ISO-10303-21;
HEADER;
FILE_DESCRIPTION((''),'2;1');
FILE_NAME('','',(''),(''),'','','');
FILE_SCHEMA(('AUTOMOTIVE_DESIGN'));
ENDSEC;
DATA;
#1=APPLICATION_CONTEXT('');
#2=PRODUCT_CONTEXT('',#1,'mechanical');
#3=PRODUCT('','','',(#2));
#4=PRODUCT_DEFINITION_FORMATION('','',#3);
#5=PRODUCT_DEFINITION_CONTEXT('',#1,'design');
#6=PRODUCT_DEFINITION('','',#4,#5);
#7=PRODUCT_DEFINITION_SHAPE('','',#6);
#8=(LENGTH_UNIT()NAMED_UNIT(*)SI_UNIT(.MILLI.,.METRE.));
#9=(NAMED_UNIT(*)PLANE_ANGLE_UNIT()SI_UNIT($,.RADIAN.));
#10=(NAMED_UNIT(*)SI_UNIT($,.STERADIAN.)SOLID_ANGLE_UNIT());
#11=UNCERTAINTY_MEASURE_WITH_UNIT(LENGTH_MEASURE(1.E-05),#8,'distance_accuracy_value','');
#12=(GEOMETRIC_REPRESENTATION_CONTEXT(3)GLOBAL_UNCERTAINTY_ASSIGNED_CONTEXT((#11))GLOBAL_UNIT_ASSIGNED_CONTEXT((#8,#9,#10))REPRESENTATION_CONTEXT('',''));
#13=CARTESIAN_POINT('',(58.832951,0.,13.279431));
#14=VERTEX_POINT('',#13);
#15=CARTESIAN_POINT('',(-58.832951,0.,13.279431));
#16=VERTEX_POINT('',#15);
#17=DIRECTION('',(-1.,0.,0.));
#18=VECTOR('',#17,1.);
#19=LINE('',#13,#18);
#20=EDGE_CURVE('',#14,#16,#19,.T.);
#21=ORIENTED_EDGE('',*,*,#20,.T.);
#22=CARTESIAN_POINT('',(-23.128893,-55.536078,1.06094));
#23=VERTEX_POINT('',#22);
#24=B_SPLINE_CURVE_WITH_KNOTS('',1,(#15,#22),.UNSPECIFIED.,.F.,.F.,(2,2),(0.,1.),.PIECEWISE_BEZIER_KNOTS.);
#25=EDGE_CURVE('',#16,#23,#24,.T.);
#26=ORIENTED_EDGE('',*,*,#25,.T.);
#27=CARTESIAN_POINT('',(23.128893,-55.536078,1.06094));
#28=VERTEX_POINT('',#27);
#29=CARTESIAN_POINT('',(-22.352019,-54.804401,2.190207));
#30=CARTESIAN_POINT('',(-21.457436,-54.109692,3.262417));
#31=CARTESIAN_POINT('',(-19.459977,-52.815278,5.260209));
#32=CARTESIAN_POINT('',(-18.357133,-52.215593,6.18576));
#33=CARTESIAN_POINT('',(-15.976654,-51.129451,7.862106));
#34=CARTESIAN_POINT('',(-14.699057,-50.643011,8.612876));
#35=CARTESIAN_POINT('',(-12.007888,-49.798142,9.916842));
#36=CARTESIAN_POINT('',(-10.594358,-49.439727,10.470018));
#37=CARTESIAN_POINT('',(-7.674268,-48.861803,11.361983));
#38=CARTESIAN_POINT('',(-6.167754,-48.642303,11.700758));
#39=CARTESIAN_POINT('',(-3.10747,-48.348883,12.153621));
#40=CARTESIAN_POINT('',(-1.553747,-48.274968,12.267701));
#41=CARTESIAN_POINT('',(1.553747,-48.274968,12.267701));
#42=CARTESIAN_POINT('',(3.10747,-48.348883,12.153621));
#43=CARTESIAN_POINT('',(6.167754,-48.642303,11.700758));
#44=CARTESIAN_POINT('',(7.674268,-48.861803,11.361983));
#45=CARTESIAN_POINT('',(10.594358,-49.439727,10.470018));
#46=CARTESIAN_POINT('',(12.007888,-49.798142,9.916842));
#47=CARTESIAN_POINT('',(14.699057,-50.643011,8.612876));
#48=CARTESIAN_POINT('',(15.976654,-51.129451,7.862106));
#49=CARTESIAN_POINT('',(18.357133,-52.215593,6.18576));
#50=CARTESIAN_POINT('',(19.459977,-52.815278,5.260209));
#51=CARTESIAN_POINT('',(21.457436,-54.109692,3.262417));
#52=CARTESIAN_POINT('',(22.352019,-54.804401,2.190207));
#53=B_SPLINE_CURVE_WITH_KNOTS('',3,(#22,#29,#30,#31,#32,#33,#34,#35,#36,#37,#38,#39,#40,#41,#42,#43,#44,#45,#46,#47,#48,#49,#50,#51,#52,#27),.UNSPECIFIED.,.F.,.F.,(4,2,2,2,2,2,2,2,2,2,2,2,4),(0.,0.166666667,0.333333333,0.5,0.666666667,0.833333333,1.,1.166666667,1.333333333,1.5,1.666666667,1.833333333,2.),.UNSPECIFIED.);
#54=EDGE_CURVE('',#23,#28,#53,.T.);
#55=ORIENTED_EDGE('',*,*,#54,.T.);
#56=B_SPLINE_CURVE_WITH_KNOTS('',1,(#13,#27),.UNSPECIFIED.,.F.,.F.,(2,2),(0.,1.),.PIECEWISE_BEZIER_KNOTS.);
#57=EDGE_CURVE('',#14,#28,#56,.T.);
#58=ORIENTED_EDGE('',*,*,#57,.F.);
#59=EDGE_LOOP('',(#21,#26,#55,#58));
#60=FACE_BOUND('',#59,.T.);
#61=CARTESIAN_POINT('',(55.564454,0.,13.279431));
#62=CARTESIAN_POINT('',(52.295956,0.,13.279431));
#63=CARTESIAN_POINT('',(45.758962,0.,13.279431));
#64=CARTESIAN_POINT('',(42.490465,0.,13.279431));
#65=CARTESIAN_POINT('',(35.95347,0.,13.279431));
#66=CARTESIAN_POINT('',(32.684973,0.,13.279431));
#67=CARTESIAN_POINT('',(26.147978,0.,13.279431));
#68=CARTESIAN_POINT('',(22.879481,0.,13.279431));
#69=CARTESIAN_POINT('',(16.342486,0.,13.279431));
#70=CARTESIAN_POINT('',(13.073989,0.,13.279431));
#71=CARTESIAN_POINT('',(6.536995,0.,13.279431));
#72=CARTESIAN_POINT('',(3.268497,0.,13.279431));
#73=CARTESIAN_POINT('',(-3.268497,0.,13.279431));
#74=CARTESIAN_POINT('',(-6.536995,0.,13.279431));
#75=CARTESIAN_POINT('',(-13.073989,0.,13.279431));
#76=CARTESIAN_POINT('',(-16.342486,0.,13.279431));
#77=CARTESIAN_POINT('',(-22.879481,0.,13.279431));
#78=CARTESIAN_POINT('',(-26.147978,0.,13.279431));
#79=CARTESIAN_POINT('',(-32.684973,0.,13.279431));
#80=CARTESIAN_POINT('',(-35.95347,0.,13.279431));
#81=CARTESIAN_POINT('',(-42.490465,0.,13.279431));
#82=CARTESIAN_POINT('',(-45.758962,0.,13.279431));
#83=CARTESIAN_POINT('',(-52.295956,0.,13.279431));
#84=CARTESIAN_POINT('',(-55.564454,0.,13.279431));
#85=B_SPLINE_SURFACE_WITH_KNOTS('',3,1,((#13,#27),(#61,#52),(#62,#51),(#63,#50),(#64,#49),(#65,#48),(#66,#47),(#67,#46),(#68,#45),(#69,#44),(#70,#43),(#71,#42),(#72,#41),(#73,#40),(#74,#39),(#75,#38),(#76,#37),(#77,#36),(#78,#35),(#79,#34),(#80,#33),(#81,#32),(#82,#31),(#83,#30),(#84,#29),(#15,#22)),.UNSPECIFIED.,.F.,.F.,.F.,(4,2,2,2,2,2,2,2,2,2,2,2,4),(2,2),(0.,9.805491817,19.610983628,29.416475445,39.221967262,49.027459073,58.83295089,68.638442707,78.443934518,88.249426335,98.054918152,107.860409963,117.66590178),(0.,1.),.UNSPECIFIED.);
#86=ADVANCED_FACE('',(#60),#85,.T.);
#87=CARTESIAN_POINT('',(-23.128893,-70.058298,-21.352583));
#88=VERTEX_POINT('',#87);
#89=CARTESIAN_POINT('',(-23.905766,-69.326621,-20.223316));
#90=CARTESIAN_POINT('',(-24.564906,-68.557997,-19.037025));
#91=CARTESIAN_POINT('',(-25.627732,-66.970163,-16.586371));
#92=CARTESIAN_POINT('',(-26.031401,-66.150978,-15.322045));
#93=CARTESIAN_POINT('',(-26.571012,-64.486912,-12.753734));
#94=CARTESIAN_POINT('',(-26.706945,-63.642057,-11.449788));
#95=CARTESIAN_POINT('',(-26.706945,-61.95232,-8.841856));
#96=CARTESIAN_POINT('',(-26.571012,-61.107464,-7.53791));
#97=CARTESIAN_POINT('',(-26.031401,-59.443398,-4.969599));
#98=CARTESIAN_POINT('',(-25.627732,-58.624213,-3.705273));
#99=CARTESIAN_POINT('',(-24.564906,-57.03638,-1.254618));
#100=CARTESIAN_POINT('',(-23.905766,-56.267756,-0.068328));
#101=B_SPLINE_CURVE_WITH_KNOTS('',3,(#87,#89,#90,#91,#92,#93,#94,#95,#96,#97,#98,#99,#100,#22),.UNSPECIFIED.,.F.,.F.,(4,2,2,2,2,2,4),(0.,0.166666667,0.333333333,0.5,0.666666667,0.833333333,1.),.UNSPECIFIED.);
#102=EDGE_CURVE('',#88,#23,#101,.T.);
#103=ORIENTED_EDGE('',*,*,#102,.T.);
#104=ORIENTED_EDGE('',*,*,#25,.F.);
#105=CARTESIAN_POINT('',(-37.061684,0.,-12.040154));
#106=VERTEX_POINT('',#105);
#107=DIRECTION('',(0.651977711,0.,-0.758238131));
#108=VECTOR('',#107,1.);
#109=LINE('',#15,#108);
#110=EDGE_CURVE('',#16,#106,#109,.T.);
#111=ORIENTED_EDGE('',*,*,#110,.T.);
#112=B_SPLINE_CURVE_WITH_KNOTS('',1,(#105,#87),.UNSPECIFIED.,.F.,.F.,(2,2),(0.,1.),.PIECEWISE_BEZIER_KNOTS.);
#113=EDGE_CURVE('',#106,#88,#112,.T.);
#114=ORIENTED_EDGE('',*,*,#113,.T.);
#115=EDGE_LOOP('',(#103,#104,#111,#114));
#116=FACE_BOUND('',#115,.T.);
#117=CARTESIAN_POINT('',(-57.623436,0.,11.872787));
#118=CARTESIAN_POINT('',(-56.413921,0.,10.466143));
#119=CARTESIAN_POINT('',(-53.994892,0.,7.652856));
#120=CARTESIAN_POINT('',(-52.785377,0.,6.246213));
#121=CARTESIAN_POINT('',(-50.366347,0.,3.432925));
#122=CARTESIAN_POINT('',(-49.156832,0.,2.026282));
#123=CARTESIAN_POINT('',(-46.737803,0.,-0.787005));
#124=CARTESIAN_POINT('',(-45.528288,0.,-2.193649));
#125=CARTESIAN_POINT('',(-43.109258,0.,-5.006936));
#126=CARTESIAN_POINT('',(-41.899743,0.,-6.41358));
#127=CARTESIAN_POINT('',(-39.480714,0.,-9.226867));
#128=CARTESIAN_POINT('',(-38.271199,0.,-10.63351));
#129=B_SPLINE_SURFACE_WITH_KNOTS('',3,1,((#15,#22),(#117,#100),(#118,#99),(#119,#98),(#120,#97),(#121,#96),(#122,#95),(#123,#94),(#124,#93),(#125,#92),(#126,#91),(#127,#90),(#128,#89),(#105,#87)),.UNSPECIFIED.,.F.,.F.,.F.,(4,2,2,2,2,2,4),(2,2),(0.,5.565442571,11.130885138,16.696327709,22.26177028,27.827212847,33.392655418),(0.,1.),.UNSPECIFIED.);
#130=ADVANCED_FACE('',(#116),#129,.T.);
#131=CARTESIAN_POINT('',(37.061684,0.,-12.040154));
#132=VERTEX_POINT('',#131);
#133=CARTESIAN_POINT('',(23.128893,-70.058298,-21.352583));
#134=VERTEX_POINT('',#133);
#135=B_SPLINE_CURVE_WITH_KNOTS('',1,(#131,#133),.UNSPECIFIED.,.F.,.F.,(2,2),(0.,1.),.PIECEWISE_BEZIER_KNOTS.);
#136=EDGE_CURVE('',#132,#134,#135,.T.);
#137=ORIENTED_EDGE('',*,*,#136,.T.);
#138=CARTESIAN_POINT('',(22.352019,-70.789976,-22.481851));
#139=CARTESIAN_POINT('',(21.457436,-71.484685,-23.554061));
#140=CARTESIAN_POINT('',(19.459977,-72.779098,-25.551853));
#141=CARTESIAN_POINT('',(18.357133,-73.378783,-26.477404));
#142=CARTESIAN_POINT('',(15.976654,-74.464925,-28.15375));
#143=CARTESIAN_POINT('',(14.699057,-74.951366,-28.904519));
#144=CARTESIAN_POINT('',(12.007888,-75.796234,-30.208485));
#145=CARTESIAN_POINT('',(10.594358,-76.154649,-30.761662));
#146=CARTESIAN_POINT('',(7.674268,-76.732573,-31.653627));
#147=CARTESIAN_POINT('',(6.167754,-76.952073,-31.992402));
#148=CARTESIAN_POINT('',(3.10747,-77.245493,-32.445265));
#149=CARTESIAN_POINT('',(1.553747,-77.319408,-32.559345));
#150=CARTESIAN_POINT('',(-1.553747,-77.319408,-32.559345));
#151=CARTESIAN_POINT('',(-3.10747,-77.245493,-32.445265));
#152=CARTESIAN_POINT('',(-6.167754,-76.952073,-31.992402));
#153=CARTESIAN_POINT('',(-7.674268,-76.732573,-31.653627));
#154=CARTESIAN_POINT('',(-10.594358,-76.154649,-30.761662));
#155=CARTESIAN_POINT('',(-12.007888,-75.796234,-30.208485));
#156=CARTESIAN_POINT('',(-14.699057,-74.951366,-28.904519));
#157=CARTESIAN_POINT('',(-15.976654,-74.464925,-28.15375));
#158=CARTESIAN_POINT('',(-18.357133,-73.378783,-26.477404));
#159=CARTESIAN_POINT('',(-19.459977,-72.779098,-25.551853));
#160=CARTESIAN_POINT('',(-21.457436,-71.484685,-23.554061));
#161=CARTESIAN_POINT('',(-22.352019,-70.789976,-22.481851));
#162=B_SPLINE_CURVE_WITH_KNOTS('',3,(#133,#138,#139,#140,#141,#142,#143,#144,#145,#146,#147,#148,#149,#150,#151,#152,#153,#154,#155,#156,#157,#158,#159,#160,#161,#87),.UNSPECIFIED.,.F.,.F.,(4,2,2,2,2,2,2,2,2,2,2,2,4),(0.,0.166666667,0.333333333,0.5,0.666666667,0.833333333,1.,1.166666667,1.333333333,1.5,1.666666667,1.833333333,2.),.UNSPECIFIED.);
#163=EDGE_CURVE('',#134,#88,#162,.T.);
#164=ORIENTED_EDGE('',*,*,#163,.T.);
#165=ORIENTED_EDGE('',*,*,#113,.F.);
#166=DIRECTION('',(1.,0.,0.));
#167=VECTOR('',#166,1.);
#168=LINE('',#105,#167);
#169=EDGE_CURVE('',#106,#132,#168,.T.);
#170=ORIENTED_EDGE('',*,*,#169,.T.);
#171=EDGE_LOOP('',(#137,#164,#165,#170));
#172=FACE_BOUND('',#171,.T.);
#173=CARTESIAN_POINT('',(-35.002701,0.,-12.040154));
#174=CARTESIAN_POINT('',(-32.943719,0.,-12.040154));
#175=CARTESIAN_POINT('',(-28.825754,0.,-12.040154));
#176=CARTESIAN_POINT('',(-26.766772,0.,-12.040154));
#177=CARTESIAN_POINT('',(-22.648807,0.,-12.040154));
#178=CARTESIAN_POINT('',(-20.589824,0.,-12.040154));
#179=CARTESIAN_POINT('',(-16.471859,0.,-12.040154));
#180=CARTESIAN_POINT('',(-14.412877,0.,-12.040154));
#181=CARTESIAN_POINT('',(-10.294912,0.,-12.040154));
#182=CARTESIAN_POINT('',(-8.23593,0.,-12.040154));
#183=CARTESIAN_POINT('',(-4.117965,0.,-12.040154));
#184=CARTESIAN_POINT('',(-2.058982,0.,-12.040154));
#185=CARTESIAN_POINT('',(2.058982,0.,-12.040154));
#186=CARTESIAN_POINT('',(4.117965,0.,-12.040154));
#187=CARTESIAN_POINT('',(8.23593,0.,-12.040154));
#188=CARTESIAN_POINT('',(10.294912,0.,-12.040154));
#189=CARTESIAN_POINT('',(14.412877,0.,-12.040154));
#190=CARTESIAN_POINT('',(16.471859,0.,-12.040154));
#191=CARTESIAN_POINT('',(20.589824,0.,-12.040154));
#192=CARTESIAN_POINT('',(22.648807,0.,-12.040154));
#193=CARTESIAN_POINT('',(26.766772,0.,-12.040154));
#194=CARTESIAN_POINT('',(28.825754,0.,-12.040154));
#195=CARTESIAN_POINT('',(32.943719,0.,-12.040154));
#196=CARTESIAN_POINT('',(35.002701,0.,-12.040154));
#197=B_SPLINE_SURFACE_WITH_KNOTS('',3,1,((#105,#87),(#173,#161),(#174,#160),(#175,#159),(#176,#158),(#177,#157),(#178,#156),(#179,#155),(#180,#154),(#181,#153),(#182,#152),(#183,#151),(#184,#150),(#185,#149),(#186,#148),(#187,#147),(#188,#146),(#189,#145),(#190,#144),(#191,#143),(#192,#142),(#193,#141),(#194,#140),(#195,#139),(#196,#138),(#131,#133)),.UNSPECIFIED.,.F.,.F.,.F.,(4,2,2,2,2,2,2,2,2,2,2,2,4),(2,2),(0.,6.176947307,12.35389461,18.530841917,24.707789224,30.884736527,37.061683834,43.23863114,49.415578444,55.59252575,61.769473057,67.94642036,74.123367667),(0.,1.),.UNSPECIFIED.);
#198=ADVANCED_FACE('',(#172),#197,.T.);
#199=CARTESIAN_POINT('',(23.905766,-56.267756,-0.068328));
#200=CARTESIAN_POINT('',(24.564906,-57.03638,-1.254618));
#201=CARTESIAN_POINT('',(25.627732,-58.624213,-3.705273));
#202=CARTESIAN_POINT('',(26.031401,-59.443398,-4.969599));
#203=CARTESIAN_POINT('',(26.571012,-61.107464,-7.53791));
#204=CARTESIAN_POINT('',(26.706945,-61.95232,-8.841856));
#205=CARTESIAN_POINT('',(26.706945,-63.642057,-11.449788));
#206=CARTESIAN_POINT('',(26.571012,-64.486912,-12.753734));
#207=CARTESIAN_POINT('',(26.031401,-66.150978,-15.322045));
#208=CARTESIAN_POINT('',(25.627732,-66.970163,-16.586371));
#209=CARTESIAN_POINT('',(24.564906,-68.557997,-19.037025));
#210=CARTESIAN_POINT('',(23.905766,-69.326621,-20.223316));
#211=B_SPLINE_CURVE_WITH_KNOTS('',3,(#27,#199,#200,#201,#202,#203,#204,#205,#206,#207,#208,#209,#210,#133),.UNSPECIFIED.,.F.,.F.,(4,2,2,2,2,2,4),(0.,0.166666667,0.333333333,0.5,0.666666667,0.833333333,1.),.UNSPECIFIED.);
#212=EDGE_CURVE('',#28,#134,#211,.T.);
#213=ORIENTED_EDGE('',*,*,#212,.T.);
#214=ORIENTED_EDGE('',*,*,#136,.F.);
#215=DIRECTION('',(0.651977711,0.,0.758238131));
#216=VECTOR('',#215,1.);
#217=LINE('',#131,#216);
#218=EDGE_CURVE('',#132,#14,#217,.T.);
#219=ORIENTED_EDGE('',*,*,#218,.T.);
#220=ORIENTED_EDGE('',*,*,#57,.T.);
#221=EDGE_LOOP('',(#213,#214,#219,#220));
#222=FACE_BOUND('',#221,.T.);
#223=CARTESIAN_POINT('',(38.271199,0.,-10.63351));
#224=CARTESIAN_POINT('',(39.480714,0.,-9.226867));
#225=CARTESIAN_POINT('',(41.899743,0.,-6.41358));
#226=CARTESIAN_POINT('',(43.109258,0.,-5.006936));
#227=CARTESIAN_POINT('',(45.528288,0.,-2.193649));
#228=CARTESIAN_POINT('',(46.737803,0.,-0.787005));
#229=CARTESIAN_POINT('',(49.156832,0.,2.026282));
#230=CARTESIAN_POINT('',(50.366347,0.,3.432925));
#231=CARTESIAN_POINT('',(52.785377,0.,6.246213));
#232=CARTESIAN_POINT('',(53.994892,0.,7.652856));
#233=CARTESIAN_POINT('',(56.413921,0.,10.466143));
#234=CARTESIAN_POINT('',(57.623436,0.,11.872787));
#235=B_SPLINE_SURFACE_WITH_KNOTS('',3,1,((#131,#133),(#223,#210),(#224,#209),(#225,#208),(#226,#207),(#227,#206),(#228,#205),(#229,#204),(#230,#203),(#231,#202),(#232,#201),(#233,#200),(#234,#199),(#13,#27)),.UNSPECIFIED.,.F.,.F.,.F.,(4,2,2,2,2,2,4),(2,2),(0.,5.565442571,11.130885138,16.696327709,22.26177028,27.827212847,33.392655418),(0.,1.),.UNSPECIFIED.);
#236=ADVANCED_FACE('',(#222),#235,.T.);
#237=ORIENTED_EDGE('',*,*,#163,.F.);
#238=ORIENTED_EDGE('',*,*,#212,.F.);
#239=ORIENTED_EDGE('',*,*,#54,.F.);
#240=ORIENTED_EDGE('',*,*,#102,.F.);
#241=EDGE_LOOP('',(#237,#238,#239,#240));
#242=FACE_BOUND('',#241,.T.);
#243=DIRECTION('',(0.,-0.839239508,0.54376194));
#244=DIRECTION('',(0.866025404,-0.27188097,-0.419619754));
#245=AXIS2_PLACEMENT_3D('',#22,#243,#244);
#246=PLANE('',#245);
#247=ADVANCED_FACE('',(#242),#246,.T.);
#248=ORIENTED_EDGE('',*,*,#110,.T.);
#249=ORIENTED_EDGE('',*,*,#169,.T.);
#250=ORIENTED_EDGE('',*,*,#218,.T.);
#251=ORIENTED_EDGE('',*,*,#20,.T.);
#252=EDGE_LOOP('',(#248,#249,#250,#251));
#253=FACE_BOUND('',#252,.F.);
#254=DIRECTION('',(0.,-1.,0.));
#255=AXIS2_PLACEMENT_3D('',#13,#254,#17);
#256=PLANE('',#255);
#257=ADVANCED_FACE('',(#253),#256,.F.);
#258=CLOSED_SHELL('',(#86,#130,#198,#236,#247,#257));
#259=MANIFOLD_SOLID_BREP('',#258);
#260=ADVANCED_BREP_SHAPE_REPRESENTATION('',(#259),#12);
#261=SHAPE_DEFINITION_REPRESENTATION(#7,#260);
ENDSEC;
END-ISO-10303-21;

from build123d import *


# Not quite as in the source:
# - the arcs of a loft's sections are written as splines that run evenly, so that the points pair up as in the source's solid


with BuildPart() as f4:
    # F0 (on Front) → F4 section 0
    with BuildSketch(Plane.XZ):
        Polygon((58.8329508901, 13.2794305682), (0, 13.2794305682), (-58.8329508901, 13.2794305682), (-37.0616838336, -12.0401540771), (0, -12.0401540771), (37.0616838336, -12.0401540771), align=None)
    # F3 (on face) → F4 section 1
    with BuildSketch(Plane(origin=(0, -39.5994907451, 25.6573906524), x_dir=(-1, 0, 0), z_dir=(0, 0.8392395084, -0.5437619402))):
        with BuildLine():
            add(Edge.make_bspline(
                [(0, -15.9545506842), (-1.5537470677, -15.9545506842), (-3.107470141, -16.0904838393), (-6.167754458, -16.6300945331), (-7.674268442, -17.0337637385), (-10.5943577501, -18.096589328), (-12.0078879796, -18.7557292991), (-14.699056843, -20.3094763668), (-15.9766539173, -21.204059469), (-18.3571325318, -23.2015181964), (-19.4599773103, -24.304362975), (-21.4574360377, -26.6848415894), (-22.35201914, -27.9624386638), (-23.1288926738, -29.3080230955)],
                knots=[0, 0, 0, 0, 0.1666666667, 0.1666666667, 0.3333333333, 0.3333333333, 0.5, 0.5, 0.6666666667, 0.6666666667, 0.8333333333, 0.8333333333, 1, 1, 1, 1], degree=3))
            add(Edge.make_bspline(
                [(-23.1288926738, -29.3080230955), (-23.9057662077, -30.6536075271), (-24.5649061788, -32.0671377567), (-25.6277317683, -34.9872270648), (-26.0314009737, -36.4937410488), (-26.5710116674, -39.5540253657), (-26.7069448226, -41.1077484391), (-26.7069448226, -44.2152425744), (-26.5710116674, -45.7689656478), (-26.0314009737, -48.8292499647), (-25.6277317683, -50.3357639487), (-24.5649061788, -53.2558532568), (-23.9057662077, -54.6693834864), (-23.1288926738, -56.0149679181)],
                knots=[0, 0, 0, 0, 0.1666666667, 0.1666666667, 0.3333333333, 0.3333333333, 0.5, 0.5, 0.6666666667, 0.6666666667, 0.8333333333, 0.8333333333, 1, 1, 1, 1], degree=3))
            add(Edge.make_bspline(
                [(-23.1288926738, -56.0149679181), (-22.35201914, -57.3605523497), (-21.4574360377, -58.6381494241), (-19.4599773103, -61.0186280385), (-18.3571325318, -62.1214728171), (-15.9766539173, -64.1189315445), (-14.699056843, -65.0135146468), (-12.0078879796, -66.5672617144), (-10.5943577501, -67.2264016855), (-7.674268442, -68.2892272751), (-6.167754458, -68.6928964805), (-3.107470141, -69.2325071742), (-1.5537470677, -69.3684403294), (0, -69.3684403294)],
                knots=[0, 0, 0, 0, 0.1666666667, 0.1666666667, 0.3333333333, 0.3333333333, 0.5, 0.5, 0.6666666667, 0.6666666667, 0.8333333333, 0.8333333333, 1, 1, 1, 1], degree=3))
            add(Edge.make_bspline(
                [(0, -69.3684403294), (1.5537470677, -69.3684403294), (3.107470141, -69.2325071742), (6.167754458, -68.6928964805), (7.674268442, -68.2892272751), (10.5943577501, -67.2264016855), (12.0078879796, -66.5672617144), (14.699056843, -65.0135146468), (15.9766539173, -64.1189315445), (18.3571325318, -62.1214728171), (19.4599773103, -61.0186280385), (21.4574360377, -58.6381494241), (22.35201914, -57.3605523497), (23.1288926738, -56.0149679181)],
                knots=[0, 0, 0, 0, 0.1666666667, 0.1666666667, 0.3333333333, 0.3333333333, 0.5, 0.5, 0.6666666667, 0.6666666667, 0.8333333333, 0.8333333333, 1, 1, 1, 1], degree=3))
            add(Edge.make_bspline(
                [(23.1288926738, -56.0149679181), (23.9057662077, -54.6693834864), (24.5649061788, -53.2558532568), (25.6277317683, -50.3357639487), (26.0314009737, -48.8292499647), (26.5710116674, -45.7689656478), (26.7069448226, -44.2152425744), (26.7069448226, -41.1077484391), (26.5710116674, -39.5540253657), (26.0314009737, -36.4937410488), (25.6277317683, -34.9872270648), (24.5649061788, -32.0671377567), (23.9057662077, -30.6536075271), (23.1288926738, -29.3080230955)],
                knots=[0, 0, 0, 0, 0.1666666667, 0.1666666667, 0.3333333333, 0.3333333333, 0.5, 0.5, 0.6666666667, 0.6666666667, 0.8333333333, 0.8333333333, 1, 1, 1, 1], degree=3))
            add(Edge.make_bspline(
                [(23.1288926738, -29.3080230955), (22.35201914, -27.9624386638), (21.4574360377, -26.6848415894), (19.4599773103, -24.304362975), (18.3571325318, -23.2015181964), (15.9766539173, -21.204059469), (14.699056843, -20.3094763668), (12.0078879796, -18.7557292991), (10.5943577501, -18.096589328), (7.674268442, -17.0337637385), (6.167754458, -16.6300945331), (3.107470141, -16.0904838393), (1.5537470677, -15.9545506842), (0, -15.9545506842)],
                knots=[0, 0, 0, 0, 0.1666666667, 0.1666666667, 0.3333333333, 0.3333333333, 0.5, 0.5, 0.6666666667, 0.6666666667, 0.8333333333, 0.8333333333, 1, 1, 1, 1], degree=3))
        make_face()
    loft(ruled=True)


solid = f4.part
